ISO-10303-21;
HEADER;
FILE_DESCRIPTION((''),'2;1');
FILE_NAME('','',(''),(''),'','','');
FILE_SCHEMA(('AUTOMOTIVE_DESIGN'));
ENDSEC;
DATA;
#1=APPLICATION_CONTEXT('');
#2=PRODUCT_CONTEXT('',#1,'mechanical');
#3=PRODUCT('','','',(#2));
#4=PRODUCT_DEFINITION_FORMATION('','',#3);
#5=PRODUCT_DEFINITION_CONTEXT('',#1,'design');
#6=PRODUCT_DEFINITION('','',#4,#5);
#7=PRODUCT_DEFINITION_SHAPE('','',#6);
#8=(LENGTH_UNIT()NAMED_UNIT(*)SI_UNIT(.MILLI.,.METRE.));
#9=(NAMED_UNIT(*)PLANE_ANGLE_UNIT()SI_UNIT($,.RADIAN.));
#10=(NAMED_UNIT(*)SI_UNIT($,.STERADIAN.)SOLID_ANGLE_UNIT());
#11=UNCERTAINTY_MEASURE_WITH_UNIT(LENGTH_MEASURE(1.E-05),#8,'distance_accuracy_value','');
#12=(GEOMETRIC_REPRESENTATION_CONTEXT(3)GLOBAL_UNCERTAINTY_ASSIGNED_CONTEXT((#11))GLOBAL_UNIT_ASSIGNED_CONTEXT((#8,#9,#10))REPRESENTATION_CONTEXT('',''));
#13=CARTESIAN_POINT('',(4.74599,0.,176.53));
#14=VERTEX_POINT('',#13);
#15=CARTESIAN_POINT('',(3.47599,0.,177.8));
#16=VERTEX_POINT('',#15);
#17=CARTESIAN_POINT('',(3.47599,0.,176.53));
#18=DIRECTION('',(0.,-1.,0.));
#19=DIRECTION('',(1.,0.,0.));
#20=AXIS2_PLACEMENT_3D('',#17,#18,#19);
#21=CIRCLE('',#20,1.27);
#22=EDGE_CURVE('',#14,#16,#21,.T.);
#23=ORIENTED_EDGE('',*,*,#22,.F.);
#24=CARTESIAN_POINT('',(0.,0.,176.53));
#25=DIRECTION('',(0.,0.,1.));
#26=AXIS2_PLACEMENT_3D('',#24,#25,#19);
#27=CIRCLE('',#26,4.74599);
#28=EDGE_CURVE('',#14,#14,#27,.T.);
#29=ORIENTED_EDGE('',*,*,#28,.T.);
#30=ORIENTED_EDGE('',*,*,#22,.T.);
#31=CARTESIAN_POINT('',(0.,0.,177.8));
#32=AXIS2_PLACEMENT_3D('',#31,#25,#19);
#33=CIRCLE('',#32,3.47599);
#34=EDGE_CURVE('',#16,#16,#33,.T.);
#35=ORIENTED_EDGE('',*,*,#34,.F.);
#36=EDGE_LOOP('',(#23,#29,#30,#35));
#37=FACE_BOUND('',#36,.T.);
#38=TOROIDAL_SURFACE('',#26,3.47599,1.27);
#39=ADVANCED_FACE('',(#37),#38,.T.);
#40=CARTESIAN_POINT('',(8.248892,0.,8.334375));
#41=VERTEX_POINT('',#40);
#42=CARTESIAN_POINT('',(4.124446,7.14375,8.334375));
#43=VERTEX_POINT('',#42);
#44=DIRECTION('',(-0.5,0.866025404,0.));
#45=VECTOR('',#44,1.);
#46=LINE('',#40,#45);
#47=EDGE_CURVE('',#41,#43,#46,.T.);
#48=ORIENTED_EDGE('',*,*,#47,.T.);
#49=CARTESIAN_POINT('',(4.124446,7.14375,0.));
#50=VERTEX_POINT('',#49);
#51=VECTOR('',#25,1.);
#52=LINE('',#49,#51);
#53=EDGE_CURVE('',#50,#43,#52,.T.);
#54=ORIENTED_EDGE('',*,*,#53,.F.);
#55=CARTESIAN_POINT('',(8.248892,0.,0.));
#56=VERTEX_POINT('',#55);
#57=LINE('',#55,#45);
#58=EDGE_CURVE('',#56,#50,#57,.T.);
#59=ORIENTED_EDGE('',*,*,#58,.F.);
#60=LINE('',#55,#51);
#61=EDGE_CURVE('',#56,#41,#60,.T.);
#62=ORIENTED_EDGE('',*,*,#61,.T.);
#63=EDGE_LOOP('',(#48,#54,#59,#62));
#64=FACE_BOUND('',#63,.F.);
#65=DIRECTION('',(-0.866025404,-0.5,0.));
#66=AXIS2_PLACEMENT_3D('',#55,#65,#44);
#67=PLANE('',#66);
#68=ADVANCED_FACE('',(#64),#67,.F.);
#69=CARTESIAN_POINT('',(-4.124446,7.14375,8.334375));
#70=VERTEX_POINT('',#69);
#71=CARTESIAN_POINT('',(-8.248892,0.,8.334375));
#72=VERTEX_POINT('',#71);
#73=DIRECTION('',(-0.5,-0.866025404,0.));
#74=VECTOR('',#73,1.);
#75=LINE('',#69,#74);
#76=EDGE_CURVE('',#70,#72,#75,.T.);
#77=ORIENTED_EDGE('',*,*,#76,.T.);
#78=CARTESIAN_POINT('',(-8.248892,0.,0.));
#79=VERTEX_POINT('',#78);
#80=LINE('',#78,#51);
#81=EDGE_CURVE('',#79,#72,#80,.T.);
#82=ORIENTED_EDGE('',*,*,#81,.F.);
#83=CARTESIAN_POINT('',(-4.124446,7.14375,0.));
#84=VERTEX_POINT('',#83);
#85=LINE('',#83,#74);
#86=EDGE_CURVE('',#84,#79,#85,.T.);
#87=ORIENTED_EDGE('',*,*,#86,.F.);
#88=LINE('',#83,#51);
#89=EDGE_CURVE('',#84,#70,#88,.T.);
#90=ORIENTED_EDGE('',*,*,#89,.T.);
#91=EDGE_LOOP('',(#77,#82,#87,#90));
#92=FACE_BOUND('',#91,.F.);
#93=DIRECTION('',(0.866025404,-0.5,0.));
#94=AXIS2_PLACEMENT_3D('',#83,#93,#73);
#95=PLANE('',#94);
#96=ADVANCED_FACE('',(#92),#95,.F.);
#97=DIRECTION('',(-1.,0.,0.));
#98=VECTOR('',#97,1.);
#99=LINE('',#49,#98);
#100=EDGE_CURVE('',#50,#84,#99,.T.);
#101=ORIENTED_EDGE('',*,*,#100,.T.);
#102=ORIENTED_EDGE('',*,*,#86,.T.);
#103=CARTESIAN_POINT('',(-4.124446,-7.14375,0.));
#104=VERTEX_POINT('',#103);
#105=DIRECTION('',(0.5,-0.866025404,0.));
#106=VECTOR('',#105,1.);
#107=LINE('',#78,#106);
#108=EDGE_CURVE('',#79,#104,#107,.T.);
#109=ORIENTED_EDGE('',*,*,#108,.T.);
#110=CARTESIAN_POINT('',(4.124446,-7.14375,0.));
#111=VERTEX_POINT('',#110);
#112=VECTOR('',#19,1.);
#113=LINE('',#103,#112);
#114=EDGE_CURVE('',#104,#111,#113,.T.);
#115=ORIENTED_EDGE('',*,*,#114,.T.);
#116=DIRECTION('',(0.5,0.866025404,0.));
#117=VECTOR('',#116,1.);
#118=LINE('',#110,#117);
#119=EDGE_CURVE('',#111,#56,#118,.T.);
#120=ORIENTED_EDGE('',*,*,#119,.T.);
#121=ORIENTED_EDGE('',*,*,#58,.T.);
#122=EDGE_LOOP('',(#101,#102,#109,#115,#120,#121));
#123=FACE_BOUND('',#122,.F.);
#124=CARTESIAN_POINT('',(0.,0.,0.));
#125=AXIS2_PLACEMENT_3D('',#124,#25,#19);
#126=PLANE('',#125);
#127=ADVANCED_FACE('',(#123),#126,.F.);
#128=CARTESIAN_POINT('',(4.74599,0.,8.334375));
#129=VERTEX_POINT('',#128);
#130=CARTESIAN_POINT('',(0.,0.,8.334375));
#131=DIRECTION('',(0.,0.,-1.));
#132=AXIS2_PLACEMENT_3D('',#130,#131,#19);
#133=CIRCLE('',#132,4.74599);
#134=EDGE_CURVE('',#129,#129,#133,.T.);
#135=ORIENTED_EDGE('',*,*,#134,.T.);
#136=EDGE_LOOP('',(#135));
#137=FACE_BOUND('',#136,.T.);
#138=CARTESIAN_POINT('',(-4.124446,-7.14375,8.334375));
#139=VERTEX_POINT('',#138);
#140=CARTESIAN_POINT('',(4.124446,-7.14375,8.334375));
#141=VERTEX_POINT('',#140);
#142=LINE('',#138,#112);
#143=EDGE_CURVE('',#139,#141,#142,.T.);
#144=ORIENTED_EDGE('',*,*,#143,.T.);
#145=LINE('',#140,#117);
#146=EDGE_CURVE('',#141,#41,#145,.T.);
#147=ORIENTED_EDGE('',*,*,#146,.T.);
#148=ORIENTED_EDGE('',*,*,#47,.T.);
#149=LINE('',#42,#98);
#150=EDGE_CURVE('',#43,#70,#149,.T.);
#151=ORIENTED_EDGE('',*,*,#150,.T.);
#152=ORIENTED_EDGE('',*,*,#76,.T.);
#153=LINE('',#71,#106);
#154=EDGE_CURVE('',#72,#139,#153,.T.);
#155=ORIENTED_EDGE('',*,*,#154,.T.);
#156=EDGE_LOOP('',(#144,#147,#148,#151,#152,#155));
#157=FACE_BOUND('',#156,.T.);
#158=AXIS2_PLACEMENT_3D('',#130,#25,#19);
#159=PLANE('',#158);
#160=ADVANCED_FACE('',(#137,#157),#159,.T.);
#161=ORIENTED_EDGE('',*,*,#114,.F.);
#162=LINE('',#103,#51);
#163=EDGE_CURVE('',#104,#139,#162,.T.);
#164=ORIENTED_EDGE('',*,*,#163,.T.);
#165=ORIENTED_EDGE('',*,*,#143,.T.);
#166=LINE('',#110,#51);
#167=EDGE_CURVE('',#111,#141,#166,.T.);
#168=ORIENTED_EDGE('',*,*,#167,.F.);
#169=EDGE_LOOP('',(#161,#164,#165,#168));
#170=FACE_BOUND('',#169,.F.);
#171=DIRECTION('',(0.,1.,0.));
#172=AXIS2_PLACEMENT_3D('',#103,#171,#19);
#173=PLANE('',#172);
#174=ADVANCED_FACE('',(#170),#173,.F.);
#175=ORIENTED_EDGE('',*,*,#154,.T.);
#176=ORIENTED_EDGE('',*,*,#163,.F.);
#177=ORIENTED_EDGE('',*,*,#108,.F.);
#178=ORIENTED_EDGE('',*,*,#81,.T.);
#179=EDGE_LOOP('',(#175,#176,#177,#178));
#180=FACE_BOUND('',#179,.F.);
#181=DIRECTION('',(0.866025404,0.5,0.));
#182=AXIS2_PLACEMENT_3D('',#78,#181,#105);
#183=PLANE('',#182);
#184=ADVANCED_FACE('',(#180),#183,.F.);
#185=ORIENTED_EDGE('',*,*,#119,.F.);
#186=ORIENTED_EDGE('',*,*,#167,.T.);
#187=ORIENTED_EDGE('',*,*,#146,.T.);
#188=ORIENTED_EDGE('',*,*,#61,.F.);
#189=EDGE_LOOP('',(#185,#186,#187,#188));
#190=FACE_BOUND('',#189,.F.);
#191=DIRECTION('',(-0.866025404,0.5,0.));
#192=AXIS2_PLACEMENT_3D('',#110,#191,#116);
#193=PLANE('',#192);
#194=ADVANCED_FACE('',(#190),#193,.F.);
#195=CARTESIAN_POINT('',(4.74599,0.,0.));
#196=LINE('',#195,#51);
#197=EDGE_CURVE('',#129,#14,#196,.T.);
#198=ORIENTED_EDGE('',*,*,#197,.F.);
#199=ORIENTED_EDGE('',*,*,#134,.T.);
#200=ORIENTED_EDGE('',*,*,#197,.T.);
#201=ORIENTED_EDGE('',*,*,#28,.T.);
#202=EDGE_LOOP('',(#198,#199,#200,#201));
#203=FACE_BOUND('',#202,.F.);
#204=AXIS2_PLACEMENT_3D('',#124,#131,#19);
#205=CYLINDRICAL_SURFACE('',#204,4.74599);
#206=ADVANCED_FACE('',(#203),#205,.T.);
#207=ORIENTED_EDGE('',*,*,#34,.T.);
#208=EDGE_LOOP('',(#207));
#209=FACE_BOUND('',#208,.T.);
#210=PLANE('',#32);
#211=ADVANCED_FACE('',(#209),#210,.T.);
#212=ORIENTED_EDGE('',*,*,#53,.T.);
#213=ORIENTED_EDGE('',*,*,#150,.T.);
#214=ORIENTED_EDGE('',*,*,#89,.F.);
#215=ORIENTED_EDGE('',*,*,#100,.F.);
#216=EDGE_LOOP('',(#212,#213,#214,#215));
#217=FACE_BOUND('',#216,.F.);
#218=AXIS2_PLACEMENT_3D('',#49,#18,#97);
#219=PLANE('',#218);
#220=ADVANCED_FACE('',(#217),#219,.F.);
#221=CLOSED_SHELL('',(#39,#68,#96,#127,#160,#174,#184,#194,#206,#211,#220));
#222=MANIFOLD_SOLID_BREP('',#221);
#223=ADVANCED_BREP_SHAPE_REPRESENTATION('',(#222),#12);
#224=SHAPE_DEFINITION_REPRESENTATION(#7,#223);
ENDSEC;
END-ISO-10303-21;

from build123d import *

# Parameters (mm, degrees)
F0_R     = 4.74599
F1_DEPTH = 177.8
F3_DEPTH = 8.334375
F4_R     = 1.27


# Not quite as in the source:
# - a length typed as a fraction of an inch, garbled in the dataset ("3 / 203.2 mm" for 3/8 in), is restored


with BuildPart() as f1:
    # F0 (on Top) → F1 (new body)
    with BuildSketch(Plane.XY):
        Circle(F0_R)
    extrude(amount=F1_DEPTH)

    # F2 (on Top) → F3 (join)
    with BuildSketch(Plane.XY):
        Polygon((-4.1244459855, -7.14375), (4.1244459855, -7.14375), (8.248891971, 0), (4.1244459855, 7.14375), (-4.1244459855, 7.14375), (-8.248891971, 0), align=None)
    extrude(amount=F3_DEPTH)

    # F4
    f4_edges = [f1.edges().sort_by_distance(p)[0] for p in [
        (-4.74599, 0, 177.8),
    ]]
    fillet(f4_edges, radius=F4_R)


solid = f1.part
